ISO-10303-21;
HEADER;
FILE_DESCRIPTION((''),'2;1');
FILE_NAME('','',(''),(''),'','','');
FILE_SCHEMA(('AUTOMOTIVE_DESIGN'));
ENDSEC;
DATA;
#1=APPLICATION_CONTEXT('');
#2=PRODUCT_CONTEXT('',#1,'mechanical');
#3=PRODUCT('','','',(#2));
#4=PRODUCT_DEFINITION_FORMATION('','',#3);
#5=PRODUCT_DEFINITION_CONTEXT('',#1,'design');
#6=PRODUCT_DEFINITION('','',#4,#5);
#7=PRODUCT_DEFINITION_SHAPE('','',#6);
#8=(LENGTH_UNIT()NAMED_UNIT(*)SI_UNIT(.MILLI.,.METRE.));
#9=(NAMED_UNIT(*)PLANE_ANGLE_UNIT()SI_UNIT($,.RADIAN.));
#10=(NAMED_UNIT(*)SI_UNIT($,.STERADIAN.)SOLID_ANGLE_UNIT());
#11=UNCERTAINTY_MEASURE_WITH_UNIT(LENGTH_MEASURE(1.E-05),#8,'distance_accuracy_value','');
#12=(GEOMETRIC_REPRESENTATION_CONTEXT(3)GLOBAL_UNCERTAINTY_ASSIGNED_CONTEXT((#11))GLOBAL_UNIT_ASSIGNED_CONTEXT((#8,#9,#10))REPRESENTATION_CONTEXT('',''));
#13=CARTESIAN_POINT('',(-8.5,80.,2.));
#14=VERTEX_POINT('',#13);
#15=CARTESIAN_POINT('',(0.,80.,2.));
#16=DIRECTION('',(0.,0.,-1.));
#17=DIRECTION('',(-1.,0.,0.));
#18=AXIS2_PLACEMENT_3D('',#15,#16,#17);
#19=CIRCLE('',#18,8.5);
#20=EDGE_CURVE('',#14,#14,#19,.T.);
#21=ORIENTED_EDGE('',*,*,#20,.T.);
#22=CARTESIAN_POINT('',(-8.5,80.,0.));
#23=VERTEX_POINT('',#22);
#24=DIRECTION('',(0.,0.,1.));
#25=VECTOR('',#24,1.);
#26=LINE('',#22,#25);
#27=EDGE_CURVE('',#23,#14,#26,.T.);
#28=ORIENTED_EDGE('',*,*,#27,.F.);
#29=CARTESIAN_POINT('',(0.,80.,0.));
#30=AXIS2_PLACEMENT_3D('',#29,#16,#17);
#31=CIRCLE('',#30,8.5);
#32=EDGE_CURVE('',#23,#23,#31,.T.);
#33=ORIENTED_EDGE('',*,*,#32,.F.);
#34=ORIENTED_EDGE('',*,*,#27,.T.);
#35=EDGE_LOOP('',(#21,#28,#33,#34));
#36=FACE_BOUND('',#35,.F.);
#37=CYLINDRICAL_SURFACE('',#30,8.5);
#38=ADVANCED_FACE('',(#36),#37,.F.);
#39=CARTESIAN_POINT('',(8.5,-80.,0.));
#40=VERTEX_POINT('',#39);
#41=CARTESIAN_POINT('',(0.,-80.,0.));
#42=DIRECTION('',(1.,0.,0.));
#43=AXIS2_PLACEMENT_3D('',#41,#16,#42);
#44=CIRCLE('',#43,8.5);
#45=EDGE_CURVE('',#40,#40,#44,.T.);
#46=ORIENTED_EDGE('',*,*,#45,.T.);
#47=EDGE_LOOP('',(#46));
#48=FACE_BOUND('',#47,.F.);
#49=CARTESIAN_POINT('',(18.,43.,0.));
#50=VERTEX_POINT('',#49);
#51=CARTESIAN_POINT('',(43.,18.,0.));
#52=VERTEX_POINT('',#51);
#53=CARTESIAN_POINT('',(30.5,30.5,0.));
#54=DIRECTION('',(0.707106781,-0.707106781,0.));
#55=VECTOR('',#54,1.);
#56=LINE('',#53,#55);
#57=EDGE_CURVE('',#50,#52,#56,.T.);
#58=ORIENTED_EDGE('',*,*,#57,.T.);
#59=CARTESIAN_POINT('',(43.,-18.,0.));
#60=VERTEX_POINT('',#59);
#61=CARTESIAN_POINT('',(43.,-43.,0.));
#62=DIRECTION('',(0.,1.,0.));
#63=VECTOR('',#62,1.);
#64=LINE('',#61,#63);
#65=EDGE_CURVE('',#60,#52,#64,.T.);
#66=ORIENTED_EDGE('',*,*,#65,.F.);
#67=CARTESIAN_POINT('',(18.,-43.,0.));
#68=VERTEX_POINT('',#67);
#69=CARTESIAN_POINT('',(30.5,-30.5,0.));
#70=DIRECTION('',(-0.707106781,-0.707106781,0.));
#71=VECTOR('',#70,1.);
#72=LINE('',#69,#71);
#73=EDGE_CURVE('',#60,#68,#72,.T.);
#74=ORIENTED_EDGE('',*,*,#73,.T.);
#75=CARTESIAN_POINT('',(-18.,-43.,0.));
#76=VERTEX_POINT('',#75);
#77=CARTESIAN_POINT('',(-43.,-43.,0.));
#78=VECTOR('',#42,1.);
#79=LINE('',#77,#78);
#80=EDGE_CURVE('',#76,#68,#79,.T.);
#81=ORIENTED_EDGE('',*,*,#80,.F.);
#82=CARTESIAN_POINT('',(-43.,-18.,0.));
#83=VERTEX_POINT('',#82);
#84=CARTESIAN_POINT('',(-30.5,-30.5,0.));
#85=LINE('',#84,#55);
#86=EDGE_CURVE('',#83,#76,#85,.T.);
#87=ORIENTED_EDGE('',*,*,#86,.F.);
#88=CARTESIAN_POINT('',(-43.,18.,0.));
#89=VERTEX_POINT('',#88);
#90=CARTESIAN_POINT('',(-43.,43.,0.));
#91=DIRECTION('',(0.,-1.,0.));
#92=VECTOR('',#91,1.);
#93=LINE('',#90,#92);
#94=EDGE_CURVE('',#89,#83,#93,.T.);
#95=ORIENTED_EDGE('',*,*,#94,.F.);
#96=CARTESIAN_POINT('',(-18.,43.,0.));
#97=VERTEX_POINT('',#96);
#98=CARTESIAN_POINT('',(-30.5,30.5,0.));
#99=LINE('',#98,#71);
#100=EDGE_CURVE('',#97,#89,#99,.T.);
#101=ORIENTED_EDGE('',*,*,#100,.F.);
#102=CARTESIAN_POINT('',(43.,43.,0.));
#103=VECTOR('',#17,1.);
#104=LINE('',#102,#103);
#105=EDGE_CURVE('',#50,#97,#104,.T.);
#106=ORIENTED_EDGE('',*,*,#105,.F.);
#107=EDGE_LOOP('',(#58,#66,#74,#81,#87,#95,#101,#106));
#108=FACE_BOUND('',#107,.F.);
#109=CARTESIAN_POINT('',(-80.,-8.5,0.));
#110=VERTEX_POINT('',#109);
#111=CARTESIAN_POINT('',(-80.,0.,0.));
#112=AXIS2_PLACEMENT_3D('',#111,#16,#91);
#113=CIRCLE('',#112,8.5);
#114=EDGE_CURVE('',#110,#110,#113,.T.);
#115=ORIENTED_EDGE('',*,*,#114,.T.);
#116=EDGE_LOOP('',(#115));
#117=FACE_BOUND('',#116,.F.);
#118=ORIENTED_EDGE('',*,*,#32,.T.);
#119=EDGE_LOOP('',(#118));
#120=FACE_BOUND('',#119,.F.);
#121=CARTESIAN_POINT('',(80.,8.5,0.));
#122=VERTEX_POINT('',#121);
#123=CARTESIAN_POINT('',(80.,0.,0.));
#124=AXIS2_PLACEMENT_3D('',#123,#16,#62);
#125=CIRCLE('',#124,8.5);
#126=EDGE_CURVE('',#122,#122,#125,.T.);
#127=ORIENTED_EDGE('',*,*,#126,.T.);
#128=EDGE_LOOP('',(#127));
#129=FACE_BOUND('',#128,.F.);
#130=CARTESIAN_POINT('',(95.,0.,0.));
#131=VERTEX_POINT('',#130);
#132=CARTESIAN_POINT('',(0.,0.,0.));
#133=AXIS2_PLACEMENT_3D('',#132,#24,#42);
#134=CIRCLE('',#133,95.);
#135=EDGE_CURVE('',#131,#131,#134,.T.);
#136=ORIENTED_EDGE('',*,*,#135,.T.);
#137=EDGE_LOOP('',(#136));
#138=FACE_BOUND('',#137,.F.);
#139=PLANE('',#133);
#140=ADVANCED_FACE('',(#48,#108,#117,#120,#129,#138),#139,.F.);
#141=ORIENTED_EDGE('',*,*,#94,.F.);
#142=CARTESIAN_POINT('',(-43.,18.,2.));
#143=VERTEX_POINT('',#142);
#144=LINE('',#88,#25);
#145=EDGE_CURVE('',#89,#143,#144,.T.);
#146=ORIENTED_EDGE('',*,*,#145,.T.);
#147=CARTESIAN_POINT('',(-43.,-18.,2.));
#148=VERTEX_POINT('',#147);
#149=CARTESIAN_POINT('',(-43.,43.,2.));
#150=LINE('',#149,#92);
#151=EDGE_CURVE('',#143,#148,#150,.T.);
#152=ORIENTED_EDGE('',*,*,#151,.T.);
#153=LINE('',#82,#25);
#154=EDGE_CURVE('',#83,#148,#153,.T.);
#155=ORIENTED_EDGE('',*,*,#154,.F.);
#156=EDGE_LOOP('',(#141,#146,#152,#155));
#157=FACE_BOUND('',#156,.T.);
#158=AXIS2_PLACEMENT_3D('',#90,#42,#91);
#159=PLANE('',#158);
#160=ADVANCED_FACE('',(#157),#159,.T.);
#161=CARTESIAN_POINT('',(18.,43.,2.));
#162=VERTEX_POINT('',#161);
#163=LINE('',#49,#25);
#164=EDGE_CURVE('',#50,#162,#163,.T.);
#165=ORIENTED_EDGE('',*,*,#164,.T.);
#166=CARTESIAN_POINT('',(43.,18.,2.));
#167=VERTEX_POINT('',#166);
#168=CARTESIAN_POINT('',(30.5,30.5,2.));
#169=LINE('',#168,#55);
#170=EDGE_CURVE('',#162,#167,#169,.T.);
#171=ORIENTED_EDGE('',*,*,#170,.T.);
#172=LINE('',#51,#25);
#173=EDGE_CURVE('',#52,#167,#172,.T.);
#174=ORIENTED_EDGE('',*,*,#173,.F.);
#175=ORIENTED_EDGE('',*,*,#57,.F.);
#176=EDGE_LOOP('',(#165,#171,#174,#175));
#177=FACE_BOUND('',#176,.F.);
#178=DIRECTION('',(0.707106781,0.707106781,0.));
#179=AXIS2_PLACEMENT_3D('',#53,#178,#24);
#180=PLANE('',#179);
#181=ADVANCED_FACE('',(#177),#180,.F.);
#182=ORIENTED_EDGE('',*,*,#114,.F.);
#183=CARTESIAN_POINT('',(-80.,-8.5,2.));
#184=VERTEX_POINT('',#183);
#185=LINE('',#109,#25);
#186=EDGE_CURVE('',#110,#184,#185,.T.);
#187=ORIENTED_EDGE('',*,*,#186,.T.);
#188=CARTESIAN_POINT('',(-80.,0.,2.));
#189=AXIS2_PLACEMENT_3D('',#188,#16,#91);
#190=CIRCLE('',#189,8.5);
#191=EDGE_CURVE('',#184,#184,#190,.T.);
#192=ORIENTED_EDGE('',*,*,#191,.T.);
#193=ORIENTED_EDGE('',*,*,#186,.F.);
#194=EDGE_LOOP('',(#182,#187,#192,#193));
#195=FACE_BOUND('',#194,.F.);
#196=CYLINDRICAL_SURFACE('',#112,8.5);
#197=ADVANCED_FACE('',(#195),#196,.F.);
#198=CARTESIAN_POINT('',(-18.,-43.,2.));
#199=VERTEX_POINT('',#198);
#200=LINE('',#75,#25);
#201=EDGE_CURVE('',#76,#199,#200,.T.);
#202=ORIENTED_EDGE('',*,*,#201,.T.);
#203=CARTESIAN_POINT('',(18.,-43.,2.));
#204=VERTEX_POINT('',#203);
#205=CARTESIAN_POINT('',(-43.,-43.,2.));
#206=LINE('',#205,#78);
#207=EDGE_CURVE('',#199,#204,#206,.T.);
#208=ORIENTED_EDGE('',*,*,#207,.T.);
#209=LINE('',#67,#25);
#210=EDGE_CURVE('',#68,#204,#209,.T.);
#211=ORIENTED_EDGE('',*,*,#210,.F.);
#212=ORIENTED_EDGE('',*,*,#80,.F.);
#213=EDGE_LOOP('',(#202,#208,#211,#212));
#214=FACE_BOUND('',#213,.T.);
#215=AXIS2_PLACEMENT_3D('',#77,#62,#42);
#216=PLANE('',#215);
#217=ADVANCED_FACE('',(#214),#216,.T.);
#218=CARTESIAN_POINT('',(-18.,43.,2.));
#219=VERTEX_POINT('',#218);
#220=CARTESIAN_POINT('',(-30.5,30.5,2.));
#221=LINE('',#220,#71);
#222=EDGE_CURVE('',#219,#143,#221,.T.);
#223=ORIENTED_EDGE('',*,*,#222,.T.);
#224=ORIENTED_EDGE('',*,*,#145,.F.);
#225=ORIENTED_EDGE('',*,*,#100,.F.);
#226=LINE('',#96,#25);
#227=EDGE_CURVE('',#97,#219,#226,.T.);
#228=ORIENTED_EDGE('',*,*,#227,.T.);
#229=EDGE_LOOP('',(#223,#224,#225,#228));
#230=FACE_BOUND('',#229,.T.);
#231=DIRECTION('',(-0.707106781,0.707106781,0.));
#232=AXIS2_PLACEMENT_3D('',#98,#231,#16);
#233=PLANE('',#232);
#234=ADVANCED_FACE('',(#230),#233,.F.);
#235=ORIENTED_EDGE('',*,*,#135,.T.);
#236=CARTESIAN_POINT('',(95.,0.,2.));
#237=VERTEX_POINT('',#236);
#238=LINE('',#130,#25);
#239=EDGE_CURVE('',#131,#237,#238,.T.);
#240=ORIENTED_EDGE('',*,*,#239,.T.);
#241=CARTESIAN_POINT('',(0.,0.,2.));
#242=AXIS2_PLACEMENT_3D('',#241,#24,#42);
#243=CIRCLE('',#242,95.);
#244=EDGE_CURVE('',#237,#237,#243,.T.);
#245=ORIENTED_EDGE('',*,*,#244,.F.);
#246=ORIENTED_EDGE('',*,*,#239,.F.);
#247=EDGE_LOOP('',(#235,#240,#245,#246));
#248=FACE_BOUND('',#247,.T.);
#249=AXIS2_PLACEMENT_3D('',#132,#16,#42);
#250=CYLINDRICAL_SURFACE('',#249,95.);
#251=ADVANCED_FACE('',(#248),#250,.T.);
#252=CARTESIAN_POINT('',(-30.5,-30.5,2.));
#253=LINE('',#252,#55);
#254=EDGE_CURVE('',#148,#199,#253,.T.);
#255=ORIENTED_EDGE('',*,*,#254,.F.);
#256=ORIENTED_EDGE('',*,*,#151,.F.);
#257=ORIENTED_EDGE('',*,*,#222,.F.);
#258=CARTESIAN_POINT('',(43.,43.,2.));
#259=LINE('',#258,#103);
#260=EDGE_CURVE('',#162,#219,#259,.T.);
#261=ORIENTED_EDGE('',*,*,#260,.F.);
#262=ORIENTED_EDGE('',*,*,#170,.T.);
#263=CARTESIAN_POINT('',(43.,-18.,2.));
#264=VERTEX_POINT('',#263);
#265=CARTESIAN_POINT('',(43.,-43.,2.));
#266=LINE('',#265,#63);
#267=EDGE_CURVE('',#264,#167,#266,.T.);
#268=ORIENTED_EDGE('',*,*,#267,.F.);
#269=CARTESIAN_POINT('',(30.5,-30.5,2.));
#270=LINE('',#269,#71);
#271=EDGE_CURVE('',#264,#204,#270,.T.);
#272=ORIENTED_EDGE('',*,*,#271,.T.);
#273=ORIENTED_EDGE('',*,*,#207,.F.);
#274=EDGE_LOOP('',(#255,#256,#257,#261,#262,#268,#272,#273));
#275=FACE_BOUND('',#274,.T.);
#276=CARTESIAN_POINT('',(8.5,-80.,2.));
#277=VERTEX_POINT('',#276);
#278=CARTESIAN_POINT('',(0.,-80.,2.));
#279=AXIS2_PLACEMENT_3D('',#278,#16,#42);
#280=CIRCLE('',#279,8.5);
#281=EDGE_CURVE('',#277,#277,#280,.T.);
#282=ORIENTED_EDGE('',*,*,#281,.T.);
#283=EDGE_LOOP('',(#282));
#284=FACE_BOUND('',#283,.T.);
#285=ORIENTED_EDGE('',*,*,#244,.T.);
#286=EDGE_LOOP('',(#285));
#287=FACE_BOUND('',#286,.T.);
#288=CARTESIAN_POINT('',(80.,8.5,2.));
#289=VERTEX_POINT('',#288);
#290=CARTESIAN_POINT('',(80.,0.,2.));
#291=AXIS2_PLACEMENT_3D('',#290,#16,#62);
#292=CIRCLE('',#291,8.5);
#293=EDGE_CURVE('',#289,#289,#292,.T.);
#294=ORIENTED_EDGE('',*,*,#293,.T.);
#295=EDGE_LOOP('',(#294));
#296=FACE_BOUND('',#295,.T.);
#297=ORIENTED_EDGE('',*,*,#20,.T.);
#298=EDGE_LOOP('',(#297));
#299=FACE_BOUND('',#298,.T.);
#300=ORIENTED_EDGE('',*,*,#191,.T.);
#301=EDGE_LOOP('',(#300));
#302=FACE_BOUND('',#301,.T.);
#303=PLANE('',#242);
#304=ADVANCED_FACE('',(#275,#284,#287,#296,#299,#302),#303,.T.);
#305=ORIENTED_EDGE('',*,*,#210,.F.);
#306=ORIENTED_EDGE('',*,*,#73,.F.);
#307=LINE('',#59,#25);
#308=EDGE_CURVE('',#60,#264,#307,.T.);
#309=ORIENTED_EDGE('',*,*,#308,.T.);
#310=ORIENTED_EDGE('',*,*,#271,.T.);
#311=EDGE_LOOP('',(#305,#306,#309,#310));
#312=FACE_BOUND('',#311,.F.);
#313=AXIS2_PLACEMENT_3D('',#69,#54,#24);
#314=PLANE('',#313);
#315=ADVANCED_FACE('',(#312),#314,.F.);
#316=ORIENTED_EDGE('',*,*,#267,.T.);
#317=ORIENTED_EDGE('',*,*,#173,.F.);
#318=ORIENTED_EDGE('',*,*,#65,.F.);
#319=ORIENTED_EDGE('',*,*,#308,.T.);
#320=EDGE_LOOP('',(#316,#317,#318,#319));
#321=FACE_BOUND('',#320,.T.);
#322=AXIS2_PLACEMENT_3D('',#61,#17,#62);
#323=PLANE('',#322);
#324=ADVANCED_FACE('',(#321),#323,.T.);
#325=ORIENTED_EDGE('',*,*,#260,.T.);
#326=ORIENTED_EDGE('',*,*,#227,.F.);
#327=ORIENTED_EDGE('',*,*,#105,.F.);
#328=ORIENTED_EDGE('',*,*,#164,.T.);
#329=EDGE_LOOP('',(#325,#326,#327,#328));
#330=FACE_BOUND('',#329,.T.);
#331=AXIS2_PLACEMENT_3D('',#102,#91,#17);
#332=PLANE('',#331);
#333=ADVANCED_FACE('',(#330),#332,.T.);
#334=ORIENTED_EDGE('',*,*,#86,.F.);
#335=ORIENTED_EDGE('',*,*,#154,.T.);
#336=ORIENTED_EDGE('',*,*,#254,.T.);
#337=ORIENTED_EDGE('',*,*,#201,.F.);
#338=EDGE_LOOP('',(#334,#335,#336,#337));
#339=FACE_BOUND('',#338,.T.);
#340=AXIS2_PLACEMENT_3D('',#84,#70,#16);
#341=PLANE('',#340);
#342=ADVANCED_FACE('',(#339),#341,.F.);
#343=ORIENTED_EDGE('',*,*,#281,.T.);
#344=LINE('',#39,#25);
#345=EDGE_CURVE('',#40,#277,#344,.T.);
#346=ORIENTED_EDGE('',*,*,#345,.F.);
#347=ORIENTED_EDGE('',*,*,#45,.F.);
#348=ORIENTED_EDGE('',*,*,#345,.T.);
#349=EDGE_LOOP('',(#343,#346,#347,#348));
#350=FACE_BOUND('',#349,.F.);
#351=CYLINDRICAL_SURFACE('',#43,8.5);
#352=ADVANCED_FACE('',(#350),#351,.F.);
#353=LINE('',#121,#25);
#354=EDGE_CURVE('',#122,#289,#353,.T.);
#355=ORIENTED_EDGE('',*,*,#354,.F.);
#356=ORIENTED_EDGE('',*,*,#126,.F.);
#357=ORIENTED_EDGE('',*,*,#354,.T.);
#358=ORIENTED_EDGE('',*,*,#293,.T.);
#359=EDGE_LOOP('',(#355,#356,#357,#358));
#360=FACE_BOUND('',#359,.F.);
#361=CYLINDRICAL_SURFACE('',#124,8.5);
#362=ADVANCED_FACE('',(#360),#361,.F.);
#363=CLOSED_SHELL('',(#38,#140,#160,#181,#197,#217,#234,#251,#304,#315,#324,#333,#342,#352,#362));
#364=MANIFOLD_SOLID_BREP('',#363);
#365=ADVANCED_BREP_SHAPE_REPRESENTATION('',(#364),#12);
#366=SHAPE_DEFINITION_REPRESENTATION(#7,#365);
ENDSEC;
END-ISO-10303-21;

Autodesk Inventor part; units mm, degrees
ref_plane "YZ Plane" through (0, 0, 0) normal (1, 0, 0) x (0, 1, 0)
ref_plane "XZ Plane" through (0, 0, 0) normal (0, 1, 0) x (-1, 0, 0)
ref_plane "XY Plane" through (0, 0, 0) normal (0, 0, 1) x (1, 0, 0)
sketch "Sketch1" plane through (0, 0, 0) normal (0, 0, 1) x (1, 0, 0)
  circle A0 centre (0, 0) radius 95
  line L0 (43, 43) -> (-43, 43)
  line L1 (-43, 43) -> (-43, -43)
  line L2 (-43, -43) -> (43, -43)
  line L3 (43, -43) -> (43, 43)
  line L4 (43, 43) -> (-43, -43) construction
  line L5 (-43, 43) -> (43, -43) construction
  dimension "d157" = 190
  dimension "d158" = 86
  dimension "d159" = 86
extrude "Plate5" add sketch "Sketch1" along normal blind 2
sketch "Sketch7" plane through (0, 0, 0) normal (0, 0, -1) x (-1, 0, 0)
  circle A0 centre (0, 80) radius 8.5
  point P0 (0, 0)
  dimension "d160" = 17
  dimension "d161" = 80
extrude "Cut1" cut sketch "Sketch7" against normal blind 2
pattern_circular "Circular Pattern1" count 4 over 360 about axis through (0, 0, -10) along (0, 0, 1) of "Cut1"
chamfer "Corner Chamfer2" distance 25 angle 45 4 edges at (-43, -43, 1) (43, -43, 1) (-43, 43, 1) (43, 43, 1)
properties part number "PRS 1792 funnel FLANGE 50-90_1000x90_D1200" material "Stainless Steel"
